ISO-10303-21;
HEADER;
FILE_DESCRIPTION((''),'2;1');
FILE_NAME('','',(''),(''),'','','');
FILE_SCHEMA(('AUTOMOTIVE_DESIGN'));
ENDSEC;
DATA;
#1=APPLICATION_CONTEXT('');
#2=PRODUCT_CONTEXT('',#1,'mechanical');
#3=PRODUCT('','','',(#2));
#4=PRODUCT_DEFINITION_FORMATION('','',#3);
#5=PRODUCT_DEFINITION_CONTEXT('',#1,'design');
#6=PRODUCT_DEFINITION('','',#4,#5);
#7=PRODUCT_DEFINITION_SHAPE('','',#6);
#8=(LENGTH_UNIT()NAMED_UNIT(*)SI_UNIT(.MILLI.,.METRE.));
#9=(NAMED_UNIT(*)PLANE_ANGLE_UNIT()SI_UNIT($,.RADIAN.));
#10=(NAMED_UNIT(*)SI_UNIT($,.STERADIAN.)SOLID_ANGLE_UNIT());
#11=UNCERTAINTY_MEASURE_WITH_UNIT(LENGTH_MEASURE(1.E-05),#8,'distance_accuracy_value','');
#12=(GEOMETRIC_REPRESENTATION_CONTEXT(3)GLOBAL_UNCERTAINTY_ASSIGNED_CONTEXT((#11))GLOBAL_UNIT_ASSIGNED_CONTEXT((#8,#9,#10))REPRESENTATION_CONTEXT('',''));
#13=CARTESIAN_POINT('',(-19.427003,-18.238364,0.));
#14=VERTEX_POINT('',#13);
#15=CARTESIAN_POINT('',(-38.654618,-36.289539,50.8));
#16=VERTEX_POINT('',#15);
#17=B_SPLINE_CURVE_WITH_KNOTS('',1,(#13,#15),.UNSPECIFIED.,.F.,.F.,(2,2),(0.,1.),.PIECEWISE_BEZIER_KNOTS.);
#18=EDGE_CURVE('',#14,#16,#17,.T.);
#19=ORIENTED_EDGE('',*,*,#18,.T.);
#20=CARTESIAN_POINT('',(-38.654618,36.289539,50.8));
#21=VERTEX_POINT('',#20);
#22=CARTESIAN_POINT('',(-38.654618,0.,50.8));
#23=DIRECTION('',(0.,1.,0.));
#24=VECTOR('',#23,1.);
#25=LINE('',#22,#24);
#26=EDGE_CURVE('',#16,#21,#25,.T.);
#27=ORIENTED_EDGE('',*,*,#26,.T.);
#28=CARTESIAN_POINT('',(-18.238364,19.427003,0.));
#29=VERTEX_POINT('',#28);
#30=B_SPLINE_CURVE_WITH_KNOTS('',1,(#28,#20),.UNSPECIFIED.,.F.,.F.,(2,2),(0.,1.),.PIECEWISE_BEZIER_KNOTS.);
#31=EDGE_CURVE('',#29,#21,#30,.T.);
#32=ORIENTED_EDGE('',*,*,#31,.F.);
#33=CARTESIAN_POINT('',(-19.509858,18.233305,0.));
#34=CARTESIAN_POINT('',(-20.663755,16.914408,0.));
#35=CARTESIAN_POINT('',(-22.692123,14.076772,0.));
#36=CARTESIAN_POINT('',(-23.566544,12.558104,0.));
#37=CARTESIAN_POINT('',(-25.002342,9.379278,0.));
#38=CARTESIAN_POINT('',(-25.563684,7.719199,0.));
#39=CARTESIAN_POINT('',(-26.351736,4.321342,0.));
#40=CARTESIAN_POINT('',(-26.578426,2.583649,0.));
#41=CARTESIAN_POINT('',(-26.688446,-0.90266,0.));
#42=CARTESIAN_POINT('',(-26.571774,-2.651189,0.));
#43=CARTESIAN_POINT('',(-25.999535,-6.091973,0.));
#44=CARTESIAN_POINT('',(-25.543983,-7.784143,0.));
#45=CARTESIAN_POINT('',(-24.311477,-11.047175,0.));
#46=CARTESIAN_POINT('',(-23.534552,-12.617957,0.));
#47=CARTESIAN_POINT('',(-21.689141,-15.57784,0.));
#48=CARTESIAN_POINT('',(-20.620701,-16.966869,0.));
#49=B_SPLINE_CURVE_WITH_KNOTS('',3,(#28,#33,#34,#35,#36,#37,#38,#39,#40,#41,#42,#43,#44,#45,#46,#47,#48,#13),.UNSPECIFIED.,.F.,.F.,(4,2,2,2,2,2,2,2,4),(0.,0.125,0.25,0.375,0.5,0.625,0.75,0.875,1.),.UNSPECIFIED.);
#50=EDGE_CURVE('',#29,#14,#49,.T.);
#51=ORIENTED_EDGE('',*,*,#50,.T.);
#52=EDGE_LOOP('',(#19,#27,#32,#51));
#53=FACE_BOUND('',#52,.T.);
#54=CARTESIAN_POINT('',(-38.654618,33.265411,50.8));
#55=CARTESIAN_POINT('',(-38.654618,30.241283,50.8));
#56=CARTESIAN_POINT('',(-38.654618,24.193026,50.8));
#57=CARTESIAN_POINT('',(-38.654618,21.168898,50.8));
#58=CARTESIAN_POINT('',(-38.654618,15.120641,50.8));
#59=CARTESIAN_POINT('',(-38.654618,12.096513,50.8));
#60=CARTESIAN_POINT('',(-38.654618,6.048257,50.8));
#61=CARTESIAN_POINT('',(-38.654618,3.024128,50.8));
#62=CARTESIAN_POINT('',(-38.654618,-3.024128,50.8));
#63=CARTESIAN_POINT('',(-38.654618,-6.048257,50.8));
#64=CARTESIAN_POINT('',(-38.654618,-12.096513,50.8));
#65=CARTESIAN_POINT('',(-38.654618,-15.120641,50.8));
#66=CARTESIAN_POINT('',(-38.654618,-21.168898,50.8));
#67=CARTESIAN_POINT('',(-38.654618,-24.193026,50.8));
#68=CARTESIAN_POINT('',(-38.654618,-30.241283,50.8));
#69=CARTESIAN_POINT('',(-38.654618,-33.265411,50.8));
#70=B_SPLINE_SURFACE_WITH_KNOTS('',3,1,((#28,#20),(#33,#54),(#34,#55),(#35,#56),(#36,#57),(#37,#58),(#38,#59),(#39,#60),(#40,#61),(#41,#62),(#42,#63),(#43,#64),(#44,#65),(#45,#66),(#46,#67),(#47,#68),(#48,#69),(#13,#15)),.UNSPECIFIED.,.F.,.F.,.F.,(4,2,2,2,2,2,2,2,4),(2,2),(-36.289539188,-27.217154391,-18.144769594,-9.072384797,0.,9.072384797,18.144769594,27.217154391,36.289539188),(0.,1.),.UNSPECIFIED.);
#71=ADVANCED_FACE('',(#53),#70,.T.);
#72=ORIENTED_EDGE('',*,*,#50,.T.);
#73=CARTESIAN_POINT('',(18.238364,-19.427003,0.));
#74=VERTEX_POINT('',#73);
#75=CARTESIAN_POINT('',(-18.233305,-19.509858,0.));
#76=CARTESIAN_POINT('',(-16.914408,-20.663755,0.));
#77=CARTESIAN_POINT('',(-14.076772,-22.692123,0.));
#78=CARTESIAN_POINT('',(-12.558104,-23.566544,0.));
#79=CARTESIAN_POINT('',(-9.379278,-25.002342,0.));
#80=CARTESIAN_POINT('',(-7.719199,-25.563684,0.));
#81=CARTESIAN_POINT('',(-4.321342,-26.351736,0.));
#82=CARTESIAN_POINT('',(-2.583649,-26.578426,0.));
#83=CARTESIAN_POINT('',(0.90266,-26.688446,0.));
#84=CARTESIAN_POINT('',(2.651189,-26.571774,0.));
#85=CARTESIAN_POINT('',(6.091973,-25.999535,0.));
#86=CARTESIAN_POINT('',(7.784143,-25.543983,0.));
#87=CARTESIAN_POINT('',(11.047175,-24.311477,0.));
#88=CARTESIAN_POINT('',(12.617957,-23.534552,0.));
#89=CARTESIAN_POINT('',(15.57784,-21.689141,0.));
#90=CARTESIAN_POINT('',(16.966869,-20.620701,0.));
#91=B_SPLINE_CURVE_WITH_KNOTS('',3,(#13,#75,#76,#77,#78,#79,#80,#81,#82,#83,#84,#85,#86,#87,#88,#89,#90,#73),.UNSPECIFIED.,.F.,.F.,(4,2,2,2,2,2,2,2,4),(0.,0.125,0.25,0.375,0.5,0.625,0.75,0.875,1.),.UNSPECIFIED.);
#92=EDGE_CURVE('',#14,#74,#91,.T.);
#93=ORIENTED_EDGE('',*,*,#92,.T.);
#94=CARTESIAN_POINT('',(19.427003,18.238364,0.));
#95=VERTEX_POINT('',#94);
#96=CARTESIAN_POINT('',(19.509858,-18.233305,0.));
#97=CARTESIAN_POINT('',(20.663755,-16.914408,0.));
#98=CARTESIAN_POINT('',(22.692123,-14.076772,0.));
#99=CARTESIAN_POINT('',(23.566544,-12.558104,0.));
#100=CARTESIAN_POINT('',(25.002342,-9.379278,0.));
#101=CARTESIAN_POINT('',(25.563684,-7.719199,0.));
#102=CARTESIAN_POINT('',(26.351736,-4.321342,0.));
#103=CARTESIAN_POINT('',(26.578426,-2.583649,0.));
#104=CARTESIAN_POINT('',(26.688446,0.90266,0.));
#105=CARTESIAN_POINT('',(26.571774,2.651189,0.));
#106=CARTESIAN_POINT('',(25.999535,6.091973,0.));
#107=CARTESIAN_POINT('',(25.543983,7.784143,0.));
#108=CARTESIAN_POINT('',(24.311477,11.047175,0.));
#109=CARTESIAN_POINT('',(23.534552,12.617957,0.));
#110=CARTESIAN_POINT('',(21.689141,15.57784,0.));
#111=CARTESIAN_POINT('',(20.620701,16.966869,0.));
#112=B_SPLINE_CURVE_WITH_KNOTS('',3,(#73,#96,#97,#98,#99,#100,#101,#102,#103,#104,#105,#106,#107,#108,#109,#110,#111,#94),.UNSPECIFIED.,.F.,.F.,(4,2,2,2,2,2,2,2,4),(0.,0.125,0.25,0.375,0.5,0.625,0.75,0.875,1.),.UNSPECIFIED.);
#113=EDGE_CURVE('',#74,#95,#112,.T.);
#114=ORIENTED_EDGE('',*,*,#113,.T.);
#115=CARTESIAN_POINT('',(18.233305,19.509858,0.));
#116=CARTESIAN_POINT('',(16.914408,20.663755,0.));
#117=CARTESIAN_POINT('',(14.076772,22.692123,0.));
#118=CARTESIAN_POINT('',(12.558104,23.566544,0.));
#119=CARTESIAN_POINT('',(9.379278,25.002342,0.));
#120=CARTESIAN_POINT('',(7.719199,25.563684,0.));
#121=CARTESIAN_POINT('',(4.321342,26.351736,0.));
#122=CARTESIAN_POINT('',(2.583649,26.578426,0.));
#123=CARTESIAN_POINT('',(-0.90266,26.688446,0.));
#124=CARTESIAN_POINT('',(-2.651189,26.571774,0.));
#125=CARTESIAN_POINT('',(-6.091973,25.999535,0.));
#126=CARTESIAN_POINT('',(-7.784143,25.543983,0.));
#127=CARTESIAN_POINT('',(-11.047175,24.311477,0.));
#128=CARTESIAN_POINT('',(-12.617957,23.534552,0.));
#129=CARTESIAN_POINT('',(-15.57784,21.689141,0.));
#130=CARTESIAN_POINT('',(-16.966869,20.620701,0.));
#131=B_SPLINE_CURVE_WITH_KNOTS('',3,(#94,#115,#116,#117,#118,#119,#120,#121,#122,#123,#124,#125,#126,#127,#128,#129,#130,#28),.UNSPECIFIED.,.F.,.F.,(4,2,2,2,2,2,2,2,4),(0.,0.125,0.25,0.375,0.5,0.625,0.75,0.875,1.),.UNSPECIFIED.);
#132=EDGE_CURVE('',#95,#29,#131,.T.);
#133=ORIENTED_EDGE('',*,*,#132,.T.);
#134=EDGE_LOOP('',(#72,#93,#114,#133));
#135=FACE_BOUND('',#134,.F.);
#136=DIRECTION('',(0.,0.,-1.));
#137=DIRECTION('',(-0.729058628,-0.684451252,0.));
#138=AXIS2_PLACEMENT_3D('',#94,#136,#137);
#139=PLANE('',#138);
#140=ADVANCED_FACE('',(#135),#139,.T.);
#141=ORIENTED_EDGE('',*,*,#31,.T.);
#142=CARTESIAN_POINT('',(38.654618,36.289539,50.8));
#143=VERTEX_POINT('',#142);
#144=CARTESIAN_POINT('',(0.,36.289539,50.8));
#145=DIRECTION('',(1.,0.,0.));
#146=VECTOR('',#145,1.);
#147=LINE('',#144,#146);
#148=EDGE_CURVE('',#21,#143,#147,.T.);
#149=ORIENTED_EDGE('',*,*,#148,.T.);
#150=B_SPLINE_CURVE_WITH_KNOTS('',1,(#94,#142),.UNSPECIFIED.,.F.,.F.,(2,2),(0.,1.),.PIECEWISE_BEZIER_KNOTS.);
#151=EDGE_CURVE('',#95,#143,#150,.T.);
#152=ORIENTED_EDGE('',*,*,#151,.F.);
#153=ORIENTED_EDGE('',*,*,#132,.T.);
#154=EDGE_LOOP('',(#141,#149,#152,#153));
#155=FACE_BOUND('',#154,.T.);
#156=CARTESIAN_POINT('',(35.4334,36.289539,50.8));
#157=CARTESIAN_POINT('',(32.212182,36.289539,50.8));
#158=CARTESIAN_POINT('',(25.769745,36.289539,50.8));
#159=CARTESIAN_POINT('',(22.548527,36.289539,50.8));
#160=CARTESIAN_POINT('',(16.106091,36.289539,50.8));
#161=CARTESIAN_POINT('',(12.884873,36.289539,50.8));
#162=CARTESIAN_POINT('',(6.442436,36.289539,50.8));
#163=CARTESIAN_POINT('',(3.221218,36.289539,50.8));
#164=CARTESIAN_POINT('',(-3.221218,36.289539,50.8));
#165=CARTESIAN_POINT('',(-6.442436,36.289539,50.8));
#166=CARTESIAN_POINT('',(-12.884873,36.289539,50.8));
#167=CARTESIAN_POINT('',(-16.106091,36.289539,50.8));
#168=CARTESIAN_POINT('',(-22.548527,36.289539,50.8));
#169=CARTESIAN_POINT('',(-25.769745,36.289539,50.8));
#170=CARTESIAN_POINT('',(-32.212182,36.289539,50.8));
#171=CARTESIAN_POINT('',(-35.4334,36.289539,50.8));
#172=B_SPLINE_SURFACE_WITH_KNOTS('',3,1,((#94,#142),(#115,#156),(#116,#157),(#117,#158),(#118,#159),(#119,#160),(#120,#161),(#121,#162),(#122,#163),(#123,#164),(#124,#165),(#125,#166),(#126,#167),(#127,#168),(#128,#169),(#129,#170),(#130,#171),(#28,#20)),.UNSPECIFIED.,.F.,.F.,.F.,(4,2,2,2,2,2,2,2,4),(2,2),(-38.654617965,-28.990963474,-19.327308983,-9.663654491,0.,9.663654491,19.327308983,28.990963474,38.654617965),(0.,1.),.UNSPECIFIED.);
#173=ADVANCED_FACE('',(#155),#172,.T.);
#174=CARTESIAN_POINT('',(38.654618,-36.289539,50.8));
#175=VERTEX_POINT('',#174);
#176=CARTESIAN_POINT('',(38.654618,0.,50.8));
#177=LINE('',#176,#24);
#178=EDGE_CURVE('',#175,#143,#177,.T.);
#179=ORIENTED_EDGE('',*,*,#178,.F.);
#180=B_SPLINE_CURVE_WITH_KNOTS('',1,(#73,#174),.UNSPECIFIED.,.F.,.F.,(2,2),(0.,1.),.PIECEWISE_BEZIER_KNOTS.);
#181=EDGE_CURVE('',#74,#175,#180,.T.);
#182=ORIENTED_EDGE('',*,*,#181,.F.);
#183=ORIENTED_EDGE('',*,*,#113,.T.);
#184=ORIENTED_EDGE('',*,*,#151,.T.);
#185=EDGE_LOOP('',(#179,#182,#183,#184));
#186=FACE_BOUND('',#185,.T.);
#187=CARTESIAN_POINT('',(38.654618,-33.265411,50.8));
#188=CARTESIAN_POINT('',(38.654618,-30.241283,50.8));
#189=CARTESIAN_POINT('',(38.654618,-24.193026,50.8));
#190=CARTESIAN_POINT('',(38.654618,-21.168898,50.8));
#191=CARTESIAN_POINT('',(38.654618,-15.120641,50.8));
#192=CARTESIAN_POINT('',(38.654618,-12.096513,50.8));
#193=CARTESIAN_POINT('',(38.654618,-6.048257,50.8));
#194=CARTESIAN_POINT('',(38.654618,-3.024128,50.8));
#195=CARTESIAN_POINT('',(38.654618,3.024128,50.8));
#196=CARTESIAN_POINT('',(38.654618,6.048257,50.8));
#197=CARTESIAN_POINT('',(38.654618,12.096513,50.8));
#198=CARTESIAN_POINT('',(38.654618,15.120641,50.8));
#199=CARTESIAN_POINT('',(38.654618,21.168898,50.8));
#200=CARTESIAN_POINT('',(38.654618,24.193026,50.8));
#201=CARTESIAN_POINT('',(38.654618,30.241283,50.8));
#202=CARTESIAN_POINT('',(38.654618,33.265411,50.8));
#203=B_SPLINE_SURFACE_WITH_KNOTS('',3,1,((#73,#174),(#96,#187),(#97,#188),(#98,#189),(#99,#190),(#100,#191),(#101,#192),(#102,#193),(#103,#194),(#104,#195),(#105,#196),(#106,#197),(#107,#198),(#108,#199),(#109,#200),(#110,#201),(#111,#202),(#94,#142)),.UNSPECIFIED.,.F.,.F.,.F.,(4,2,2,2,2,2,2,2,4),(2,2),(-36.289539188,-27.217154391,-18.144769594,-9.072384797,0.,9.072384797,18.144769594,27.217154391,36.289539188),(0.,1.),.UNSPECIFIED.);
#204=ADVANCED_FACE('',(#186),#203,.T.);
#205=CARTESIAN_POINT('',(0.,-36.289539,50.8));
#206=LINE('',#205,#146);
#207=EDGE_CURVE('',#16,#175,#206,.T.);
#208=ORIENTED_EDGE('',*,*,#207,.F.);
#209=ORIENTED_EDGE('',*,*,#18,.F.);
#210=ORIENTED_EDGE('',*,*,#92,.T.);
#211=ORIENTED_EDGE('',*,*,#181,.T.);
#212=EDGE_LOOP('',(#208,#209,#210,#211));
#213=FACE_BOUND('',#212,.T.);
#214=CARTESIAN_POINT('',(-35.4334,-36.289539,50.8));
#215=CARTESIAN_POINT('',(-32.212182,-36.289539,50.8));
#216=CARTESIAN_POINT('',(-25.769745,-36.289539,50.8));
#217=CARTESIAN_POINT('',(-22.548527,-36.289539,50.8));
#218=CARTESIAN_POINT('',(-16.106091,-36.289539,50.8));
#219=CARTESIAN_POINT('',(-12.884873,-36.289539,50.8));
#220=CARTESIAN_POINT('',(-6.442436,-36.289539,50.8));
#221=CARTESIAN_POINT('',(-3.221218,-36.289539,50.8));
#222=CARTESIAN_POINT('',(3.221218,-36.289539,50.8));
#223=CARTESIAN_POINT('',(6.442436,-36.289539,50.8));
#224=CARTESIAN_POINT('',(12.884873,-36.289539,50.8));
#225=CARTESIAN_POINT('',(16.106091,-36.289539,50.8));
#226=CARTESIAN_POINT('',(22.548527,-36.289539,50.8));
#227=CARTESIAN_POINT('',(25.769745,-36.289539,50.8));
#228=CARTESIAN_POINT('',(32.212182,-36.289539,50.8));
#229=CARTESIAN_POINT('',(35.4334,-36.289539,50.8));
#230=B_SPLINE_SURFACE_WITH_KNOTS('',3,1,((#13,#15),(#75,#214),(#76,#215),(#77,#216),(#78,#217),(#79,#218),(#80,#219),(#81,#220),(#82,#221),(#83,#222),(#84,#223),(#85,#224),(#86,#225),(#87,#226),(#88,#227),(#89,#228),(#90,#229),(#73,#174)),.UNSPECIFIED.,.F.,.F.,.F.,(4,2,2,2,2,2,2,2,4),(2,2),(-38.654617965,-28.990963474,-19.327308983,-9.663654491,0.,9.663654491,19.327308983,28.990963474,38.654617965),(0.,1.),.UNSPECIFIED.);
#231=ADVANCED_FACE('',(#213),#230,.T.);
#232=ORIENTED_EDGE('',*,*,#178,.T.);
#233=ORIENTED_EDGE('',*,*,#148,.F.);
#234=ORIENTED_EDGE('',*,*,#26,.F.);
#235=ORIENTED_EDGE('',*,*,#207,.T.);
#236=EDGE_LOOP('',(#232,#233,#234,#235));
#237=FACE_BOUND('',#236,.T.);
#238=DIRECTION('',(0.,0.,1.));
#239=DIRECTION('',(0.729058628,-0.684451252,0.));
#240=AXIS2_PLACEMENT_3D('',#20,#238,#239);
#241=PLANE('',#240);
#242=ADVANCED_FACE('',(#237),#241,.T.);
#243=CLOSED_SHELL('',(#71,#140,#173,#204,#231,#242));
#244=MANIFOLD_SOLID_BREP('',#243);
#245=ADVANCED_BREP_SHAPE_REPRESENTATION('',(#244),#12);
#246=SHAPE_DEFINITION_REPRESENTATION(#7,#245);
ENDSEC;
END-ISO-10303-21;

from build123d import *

# Parameters (mm, degrees)
F2_W = 77.3092359304
F2_H = 72.5790783763


# Not quite as in the source:
# - the arcs of a loft's sections are written as splines that run evenly, so that the points pair up as in the source's solid


with BuildPart() as f3:
    # F1 (on Top) → F3 section 0
    with BuildSketch(Plane.XY):
        with BuildLine():
            add(Edge.make_bspline(
                [(19.4270029416, 18.2383637886), (18.2333048231, 19.5098581578), (16.9144080528, 20.6637549911), (14.0767724731, 22.6921230133), (12.5581038297, 23.5665440468), (9.3792776513, 25.0023423072), (7.719198719, 25.5636840312), (4.3213424493, 26.3517356078), (2.5836491306, 26.5784259744), (-0.9026595196, 26.6884464872), (-2.6511886451, 26.5717739129), (-6.0919727893, 25.9995353351), (-7.7841427278, 25.5439834815), (-11.0471749612, 24.3114766208), (-12.617956571, 23.5345520901), (-15.5778403946, 21.6891414941), (-16.9668694194, 20.6207010602), (-18.2383637886, 19.4270029416)],
                knots=[0, 0, 0, 0, 0.125, 0.125, 0.25, 0.25, 0.375, 0.375, 0.5, 0.5, 0.625, 0.625, 0.75, 0.75, 0.875, 0.875, 1, 1, 1, 1], degree=3))
            add(Edge.make_bspline(
                [(-18.2383637886, 19.4270029416), (-19.5098581578, 18.2333048231), (-20.6637549911, 16.9144080528), (-22.6921230133, 14.0767724731), (-23.5665440468, 12.5581038297), (-25.0023423072, 9.3792776513), (-25.5636840312, 7.719198719), (-26.3517356078, 4.3213424493), (-26.5784259744, 2.5836491306), (-26.6884464872, -0.9026595196), (-26.5717739129, -2.6511886451), (-25.9995353351, -6.0919727893), (-25.5439834815, -7.7841427278), (-24.3114766208, -11.0471749612), (-23.5345520901, -12.617956571), (-21.6891414941, -15.5778403946), (-20.6207010602, -16.9668694194), (-19.4270029416, -18.2383637886)],
                knots=[0, 0, 0, 0, 0.125, 0.125, 0.25, 0.25, 0.375, 0.375, 0.5, 0.5, 0.625, 0.625, 0.75, 0.75, 0.875, 0.875, 1, 1, 1, 1], degree=3))
            add(Edge.make_bspline(
                [(-19.4270029416, -18.2383637886), (-18.2333048231, -19.5098581578), (-16.9144080528, -20.6637549911), (-14.0767724731, -22.6921230133), (-12.5581038297, -23.5665440468), (-9.3792776513, -25.0023423072), (-7.719198719, -25.5636840312), (-4.3213424493, -26.3517356078), (-2.5836491306, -26.5784259744), (0.9026595196, -26.6884464872), (2.6511886451, -26.5717739129), (6.0919727893, -25.9995353351), (7.7841427278, -25.5439834815), (11.0471749612, -24.3114766208), (12.617956571, -23.5345520901), (15.5778403946, -21.6891414941), (16.9668694194, -20.6207010602), (18.2383637886, -19.4270029416)],
                knots=[0, 0, 0, 0, 0.125, 0.125, 0.25, 0.25, 0.375, 0.375, 0.5, 0.5, 0.625, 0.625, 0.75, 0.75, 0.875, 0.875, 1, 1, 1, 1], degree=3))
            add(Edge.make_bspline(
                [(18.2383637886, -19.4270029416), (19.5098581578, -18.2333048231), (20.6637549911, -16.9144080528), (22.6921230133, -14.0767724731), (23.5665440468, -12.5581038297), (25.0023423072, -9.3792776513), (25.5636840312, -7.719198719), (26.3517356078, -4.3213424493), (26.5784259744, -2.5836491306), (26.6884464872, 0.9026595196), (26.5717739129, 2.6511886451), (25.9995353351, 6.0919727893), (25.5439834815, 7.7841427278), (24.3114766208, 11.0471749612), (23.5345520901, 12.617956571), (21.6891414941, 15.5778403946), (20.6207010602, 16.9668694194), (19.4270029416, 18.2383637886)],
                knots=[0, 0, 0, 0, 0.125, 0.125, 0.25, 0.25, 0.375, 0.375, 0.5, 0.5, 0.625, 0.625, 0.75, 0.75, 0.875, 0.875, 1, 1, 1, 1], degree=3))
        make_face()
    # F2 (on offset) → F3 section 1
    with BuildSketch(Plane.XY.offset(50.8)):
        Rectangle(F2_W, F2_H)
    loft(ruled=True)


solid = f3.part
